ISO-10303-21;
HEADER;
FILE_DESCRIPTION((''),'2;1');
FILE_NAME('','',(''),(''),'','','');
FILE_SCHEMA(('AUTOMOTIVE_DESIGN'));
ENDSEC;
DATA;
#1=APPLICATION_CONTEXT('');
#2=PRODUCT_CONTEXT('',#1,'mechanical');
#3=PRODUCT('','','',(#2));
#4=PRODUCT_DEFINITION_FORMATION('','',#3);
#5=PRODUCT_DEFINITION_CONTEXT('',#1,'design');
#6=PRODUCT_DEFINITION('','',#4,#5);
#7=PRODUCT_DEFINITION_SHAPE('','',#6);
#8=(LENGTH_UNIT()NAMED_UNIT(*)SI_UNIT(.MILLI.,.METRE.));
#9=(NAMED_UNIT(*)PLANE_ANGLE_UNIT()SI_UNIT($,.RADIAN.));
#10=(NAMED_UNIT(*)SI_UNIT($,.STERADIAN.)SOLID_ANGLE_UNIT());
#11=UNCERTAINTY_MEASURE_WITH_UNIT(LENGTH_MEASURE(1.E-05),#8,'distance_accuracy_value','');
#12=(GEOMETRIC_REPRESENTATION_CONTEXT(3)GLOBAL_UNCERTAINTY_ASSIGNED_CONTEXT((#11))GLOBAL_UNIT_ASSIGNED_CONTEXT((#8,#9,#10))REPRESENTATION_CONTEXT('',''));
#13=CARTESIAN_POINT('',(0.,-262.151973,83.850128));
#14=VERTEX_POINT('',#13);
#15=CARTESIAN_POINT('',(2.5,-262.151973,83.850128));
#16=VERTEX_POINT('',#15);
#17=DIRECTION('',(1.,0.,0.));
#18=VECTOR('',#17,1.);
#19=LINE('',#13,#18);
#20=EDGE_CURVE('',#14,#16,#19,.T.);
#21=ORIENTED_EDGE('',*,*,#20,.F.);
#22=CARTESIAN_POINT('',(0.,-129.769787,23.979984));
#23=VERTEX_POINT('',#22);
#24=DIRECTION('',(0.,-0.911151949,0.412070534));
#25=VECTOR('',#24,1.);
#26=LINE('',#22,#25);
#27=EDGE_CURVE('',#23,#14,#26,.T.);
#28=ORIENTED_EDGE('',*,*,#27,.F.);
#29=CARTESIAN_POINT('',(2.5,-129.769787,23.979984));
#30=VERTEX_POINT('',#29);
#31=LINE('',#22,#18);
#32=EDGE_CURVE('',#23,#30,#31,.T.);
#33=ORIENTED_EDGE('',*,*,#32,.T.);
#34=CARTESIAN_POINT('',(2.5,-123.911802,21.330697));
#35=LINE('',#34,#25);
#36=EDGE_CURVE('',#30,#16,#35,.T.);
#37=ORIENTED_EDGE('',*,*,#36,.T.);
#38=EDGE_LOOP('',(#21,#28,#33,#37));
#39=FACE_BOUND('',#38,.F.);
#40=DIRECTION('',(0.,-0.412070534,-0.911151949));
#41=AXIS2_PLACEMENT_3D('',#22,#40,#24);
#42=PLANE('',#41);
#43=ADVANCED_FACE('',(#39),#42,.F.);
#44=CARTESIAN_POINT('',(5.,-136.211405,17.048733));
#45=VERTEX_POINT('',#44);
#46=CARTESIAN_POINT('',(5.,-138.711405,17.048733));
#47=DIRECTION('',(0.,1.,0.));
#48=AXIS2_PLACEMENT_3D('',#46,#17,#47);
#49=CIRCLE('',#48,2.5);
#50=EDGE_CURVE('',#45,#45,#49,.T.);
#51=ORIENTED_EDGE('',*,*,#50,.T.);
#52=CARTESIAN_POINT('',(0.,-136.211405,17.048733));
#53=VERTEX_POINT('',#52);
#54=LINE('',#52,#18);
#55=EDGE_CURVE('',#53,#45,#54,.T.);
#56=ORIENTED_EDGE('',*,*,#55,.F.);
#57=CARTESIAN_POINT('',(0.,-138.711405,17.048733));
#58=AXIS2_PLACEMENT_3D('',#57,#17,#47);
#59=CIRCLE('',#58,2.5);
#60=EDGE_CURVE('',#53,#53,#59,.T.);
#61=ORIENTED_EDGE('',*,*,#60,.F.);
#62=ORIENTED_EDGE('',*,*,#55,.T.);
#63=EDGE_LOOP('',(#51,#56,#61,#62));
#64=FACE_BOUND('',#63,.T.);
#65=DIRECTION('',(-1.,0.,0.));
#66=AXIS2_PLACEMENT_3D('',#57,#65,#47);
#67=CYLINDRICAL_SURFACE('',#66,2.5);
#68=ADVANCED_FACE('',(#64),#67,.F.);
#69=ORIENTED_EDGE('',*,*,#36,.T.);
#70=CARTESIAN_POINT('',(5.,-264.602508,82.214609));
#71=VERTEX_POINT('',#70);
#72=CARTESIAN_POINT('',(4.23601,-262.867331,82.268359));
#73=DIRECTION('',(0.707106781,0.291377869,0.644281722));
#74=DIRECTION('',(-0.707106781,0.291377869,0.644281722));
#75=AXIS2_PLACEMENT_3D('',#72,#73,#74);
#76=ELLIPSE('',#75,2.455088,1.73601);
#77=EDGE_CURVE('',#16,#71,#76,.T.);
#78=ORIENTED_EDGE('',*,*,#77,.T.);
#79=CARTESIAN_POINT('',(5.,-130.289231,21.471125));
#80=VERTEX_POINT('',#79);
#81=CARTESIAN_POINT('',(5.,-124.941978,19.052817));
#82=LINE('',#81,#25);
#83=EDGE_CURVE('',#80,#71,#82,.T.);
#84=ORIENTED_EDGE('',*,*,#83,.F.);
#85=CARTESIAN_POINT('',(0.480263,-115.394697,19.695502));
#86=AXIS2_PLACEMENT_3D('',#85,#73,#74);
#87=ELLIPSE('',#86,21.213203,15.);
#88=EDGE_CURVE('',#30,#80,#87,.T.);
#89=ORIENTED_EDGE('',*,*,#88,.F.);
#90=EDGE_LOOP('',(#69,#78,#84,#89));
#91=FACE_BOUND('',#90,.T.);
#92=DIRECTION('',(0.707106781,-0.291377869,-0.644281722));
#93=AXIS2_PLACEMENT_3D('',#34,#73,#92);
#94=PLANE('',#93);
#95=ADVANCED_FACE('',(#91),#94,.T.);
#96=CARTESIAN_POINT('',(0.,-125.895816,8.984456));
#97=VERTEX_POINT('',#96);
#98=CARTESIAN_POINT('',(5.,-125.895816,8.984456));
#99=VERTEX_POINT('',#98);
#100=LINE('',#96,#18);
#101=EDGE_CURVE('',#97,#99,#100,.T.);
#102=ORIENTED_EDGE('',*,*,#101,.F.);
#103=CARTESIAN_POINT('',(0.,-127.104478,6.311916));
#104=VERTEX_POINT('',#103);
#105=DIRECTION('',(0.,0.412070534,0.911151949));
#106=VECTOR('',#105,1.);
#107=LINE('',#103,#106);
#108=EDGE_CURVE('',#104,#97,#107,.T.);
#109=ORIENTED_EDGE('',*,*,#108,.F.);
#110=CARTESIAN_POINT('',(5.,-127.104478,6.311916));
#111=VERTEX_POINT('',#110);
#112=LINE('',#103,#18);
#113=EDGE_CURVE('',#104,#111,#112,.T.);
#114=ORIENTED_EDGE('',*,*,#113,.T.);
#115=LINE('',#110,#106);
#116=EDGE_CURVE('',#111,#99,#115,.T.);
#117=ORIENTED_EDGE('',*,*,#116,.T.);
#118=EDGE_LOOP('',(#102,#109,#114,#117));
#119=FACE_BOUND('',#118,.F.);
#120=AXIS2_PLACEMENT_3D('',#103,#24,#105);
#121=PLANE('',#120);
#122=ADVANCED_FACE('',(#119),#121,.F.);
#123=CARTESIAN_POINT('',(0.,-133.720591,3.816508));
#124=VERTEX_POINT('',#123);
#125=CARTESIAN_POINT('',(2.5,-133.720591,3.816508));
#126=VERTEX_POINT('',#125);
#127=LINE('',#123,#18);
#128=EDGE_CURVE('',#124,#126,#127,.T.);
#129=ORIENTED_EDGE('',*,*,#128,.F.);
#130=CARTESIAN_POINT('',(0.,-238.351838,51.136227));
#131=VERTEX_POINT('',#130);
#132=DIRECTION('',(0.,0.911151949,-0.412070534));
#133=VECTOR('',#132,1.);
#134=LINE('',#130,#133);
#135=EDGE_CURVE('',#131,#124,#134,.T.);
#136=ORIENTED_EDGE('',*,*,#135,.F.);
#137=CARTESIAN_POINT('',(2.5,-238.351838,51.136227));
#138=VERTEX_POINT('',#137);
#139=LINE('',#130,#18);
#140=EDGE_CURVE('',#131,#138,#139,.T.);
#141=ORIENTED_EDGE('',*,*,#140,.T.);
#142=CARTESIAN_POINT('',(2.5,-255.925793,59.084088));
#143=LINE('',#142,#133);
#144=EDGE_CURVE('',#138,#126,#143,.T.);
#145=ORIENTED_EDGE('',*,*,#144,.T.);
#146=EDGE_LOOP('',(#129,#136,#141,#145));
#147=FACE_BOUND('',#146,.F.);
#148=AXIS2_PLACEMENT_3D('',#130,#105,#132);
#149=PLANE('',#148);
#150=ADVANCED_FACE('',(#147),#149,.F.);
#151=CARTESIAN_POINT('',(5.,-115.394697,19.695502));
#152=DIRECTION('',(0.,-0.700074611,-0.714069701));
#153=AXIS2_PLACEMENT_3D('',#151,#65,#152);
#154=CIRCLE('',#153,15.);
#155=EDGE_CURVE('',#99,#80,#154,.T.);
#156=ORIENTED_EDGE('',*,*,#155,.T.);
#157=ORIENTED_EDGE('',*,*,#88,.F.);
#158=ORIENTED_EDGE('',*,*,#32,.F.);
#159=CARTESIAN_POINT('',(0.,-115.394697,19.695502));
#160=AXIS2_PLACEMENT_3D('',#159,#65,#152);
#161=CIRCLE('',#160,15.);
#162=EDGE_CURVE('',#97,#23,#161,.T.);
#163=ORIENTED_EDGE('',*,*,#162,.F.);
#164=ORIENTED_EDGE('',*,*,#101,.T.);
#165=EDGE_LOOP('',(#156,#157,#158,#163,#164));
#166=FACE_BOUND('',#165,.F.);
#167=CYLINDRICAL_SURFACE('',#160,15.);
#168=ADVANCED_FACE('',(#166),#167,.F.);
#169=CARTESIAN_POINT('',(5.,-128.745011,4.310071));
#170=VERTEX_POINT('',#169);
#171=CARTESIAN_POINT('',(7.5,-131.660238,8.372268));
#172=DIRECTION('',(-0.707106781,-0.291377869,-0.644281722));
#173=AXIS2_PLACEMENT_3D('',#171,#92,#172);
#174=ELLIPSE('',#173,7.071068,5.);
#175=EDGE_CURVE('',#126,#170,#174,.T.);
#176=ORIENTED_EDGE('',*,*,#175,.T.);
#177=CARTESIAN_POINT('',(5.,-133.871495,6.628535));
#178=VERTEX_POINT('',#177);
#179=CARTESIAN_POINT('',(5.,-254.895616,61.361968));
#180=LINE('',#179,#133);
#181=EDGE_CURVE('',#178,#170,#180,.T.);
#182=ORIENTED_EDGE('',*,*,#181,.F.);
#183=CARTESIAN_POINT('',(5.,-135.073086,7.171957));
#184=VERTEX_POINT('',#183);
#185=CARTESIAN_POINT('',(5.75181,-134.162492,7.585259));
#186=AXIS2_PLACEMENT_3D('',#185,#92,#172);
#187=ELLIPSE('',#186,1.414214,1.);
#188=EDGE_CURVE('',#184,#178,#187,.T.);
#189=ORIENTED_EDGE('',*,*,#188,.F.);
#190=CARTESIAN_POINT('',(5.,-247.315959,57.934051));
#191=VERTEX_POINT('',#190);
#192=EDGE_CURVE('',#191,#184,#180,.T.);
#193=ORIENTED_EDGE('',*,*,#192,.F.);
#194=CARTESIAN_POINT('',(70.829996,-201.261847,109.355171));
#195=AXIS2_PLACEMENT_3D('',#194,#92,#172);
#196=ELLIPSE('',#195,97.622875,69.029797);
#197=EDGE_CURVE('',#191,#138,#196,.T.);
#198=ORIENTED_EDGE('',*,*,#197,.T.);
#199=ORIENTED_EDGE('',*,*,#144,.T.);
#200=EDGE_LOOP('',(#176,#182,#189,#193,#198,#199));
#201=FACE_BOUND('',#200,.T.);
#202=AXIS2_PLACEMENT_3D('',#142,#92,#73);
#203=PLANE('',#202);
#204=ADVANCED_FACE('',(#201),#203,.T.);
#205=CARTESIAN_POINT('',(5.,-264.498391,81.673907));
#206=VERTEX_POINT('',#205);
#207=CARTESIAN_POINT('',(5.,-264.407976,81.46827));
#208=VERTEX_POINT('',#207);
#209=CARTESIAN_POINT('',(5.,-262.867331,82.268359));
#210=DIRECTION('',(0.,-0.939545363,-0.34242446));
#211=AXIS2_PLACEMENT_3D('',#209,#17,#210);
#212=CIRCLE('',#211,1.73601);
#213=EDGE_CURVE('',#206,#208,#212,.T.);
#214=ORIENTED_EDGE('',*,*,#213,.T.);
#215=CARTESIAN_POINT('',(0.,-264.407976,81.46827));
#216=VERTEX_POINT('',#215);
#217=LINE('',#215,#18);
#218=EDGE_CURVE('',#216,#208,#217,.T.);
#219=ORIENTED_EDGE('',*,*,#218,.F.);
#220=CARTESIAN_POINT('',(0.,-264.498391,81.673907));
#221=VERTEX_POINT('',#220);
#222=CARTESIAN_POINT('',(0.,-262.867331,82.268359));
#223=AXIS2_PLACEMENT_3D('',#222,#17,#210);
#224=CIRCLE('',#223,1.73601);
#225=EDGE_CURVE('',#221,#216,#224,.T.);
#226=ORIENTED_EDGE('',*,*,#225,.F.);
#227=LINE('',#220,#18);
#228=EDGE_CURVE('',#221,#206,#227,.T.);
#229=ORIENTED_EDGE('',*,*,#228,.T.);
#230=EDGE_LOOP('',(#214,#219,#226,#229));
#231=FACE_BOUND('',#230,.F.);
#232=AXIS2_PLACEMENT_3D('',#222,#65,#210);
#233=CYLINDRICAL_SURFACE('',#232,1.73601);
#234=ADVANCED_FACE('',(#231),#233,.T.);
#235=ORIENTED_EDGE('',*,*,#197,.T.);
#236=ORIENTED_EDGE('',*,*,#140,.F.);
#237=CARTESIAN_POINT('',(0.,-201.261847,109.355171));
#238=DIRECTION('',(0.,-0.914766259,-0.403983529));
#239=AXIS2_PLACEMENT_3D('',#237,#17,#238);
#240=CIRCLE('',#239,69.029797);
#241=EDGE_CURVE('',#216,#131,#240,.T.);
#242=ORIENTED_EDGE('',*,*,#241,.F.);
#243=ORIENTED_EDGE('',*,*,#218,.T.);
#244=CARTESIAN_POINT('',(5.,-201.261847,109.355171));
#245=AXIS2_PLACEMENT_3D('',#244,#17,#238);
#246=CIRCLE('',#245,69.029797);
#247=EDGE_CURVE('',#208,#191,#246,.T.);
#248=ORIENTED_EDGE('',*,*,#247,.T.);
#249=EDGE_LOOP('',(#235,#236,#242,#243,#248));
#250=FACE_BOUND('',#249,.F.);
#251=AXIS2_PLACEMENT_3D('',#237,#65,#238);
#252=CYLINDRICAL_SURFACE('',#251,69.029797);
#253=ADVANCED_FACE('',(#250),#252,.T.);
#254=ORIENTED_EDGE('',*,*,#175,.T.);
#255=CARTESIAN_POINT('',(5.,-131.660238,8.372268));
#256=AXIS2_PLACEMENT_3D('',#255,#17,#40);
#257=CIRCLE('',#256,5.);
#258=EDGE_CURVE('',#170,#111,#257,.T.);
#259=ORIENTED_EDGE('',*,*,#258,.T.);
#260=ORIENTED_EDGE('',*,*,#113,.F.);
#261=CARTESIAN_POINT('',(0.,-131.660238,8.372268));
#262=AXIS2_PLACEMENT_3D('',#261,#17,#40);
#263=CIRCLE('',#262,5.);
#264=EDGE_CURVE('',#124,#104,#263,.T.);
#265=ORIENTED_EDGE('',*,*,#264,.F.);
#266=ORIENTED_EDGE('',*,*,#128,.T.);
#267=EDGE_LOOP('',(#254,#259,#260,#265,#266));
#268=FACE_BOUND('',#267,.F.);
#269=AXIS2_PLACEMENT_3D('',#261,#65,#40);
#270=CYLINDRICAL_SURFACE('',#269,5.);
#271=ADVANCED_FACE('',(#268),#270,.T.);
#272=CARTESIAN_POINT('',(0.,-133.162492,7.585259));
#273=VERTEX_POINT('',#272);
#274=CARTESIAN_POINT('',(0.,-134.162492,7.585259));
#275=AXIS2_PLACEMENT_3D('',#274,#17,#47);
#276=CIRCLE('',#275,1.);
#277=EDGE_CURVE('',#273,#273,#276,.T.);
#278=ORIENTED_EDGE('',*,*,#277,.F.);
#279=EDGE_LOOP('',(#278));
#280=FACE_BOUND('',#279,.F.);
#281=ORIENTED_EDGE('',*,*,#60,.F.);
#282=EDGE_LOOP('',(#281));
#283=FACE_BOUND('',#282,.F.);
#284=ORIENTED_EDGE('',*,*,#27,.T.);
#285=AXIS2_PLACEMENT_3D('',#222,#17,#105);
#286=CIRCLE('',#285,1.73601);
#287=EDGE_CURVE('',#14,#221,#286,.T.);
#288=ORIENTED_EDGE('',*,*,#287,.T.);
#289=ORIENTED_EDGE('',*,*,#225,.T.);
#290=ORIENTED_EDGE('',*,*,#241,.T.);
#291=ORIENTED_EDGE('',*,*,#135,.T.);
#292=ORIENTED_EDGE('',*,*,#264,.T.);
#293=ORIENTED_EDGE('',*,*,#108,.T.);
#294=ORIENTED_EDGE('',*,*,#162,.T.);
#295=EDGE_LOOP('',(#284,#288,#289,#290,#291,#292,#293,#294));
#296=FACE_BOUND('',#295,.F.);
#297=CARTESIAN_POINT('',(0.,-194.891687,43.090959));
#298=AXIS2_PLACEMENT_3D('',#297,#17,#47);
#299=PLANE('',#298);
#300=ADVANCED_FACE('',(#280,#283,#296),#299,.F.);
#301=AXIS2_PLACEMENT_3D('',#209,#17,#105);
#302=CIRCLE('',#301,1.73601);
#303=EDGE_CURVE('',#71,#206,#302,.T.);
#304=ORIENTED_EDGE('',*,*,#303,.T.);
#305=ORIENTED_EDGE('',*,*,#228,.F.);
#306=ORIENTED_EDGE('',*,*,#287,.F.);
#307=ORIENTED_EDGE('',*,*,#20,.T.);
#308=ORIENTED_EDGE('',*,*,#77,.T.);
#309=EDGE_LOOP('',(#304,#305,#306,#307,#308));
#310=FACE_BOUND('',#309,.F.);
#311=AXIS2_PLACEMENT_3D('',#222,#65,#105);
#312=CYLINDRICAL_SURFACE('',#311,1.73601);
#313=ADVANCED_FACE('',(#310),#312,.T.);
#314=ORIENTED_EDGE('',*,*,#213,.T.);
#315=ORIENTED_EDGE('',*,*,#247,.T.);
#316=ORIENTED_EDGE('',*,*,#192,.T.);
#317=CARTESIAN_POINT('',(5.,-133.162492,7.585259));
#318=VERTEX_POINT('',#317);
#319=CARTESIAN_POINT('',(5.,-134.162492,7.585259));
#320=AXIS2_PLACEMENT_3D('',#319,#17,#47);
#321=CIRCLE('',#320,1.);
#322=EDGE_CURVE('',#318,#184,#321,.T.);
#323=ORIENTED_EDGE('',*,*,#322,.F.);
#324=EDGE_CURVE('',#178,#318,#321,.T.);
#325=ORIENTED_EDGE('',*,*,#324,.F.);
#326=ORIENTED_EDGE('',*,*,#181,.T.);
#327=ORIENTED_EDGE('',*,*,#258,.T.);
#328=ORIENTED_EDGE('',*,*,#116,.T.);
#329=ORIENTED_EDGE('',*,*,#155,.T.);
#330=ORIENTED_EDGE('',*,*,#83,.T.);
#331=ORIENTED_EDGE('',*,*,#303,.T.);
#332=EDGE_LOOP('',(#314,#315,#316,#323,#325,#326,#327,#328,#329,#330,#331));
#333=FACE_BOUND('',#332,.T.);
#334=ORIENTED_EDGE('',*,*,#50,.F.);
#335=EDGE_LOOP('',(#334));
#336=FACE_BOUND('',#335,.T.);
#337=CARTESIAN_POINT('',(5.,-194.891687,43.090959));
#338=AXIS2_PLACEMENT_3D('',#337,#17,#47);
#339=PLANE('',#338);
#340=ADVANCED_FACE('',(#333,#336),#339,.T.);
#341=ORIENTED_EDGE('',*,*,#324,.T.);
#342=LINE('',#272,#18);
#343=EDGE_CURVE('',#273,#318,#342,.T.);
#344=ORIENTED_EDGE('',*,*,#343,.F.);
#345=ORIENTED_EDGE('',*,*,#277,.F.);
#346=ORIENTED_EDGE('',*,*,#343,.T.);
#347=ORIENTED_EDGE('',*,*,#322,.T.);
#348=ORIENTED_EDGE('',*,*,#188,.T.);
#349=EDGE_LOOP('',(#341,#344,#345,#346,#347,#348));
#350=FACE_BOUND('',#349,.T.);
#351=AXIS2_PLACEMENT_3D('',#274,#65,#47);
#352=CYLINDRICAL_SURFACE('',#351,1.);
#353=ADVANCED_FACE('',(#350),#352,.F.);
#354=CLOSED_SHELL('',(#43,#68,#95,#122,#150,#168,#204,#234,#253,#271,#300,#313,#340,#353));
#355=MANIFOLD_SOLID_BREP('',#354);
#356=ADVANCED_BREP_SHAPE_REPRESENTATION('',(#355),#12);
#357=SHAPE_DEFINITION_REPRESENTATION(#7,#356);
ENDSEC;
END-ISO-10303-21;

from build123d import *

# Parameters (mm, degrees)
F0_R        = 1
F0_R_2      = 2.5
F1_DEPTH    = 5
F2_T1_DEPTH = 140.5508565822
F2_T3_DEPTH = 158.1494237613


# Not quite as in the source:
# - a fillet or chamfer that OpenCascade refuses, or shapes differently, is made with other operations: its cross-section is extruded or revolved along the edge and cut away or added


with BuildPart() as f1:
    # F0 (on Right) → F1 (new body)
    with BuildSketch(Plane.YZ):
        with BuildLine():
            Line((-238.351838073, 51.1362271676), (-133.7205907933, 3.81650843))
            ThreePointArc((-133.7205907933, 3.81650843), (-129.8957188572, 3.6939702207), (-127.1044783752, 6.3119155052))
            Line((-127.1044783752, 6.3119155052), (-125.8958157643, 8.9844562534))
            ThreePointArc((-125.8958157643, 8.9844562534), (-129.9178817918, 15.9435567205), (-129.7697865993, 23.9799839275))
            Line((-129.7697865993, 23.9799839275), (-224.5101433949, 66.8265250251))
            Line((-224.5101433949, 66.8265250251), (-262.1519725075, 83.8501275596))
            ThreePointArc((-262.1519725075, 83.8501275596), (-264.0478442183, 83.5411975558), (-264.4983908426, 81.6739067294))
            ThreePointArc((-264.4983908426, 81.6739067294), (-264.4532671282, 81.571051598), (-264.4079761186, 81.4682700232))
            ThreePointArc((-264.4079761186, 81.4682700232), (-253.6243159552, 64.3742338109), (-238.351838073, 51.1362271676))
        make_face()
        with Locations((-134.1624917959, 7.5852589493)):
            Circle(F0_R, mode=Mode.SUBTRACT)
        with Locations((-138.7114049438, 17.0487332662)):
            Circle(F0_R_2, mode=Mode.SUBTRACT)
        with BuildLine():
            ThreePointArc((-264.4983908426, 81.6739067294), (-264.4565130864, 81.5696244091), (-264.4079761186, 81.4682700232))
            ThreePointArc((-264.4079761186, 81.4682700232), (-264.4532671282, 81.571051598), (-264.4983908426, 81.6739067294))
        make_face()
    extrude(amount=F1_DEPTH)

    # F2: chamfer of 2.5 on 2 edges, made by hand

    # F2_s2 → F2_t1 (cut)
    with BuildSketch(Plane(origin=(0, -234.652694271, 106.1222128437), x_dir=(1, 0, 0), z_dir=(0, 0.9111519493, -0.4120705343))):
        Polygon((2.5, 51.6248961977), (5, 49.1248961977), (5, 51.6248961977), align=None)
    extrude(amount=F2_T1_DEPTH, mode=Mode.SUBTRACT)

    # F2_s4 → F2_t3 (cut)
    with BuildSketch(Plane(origin=(0, -110.8801138075, 50.1457827883), x_dir=(1, 0, 0), z_dir=(0, -0.9111519493, 0.4120705343))):
        Polygon((2.5, -31.6248961977), (5, -34.1248961977), (5, -31.6248961977), align=None)
    extrude(amount=F2_T3_DEPTH, mode=Mode.SUBTRACT)


solid = f1.part
